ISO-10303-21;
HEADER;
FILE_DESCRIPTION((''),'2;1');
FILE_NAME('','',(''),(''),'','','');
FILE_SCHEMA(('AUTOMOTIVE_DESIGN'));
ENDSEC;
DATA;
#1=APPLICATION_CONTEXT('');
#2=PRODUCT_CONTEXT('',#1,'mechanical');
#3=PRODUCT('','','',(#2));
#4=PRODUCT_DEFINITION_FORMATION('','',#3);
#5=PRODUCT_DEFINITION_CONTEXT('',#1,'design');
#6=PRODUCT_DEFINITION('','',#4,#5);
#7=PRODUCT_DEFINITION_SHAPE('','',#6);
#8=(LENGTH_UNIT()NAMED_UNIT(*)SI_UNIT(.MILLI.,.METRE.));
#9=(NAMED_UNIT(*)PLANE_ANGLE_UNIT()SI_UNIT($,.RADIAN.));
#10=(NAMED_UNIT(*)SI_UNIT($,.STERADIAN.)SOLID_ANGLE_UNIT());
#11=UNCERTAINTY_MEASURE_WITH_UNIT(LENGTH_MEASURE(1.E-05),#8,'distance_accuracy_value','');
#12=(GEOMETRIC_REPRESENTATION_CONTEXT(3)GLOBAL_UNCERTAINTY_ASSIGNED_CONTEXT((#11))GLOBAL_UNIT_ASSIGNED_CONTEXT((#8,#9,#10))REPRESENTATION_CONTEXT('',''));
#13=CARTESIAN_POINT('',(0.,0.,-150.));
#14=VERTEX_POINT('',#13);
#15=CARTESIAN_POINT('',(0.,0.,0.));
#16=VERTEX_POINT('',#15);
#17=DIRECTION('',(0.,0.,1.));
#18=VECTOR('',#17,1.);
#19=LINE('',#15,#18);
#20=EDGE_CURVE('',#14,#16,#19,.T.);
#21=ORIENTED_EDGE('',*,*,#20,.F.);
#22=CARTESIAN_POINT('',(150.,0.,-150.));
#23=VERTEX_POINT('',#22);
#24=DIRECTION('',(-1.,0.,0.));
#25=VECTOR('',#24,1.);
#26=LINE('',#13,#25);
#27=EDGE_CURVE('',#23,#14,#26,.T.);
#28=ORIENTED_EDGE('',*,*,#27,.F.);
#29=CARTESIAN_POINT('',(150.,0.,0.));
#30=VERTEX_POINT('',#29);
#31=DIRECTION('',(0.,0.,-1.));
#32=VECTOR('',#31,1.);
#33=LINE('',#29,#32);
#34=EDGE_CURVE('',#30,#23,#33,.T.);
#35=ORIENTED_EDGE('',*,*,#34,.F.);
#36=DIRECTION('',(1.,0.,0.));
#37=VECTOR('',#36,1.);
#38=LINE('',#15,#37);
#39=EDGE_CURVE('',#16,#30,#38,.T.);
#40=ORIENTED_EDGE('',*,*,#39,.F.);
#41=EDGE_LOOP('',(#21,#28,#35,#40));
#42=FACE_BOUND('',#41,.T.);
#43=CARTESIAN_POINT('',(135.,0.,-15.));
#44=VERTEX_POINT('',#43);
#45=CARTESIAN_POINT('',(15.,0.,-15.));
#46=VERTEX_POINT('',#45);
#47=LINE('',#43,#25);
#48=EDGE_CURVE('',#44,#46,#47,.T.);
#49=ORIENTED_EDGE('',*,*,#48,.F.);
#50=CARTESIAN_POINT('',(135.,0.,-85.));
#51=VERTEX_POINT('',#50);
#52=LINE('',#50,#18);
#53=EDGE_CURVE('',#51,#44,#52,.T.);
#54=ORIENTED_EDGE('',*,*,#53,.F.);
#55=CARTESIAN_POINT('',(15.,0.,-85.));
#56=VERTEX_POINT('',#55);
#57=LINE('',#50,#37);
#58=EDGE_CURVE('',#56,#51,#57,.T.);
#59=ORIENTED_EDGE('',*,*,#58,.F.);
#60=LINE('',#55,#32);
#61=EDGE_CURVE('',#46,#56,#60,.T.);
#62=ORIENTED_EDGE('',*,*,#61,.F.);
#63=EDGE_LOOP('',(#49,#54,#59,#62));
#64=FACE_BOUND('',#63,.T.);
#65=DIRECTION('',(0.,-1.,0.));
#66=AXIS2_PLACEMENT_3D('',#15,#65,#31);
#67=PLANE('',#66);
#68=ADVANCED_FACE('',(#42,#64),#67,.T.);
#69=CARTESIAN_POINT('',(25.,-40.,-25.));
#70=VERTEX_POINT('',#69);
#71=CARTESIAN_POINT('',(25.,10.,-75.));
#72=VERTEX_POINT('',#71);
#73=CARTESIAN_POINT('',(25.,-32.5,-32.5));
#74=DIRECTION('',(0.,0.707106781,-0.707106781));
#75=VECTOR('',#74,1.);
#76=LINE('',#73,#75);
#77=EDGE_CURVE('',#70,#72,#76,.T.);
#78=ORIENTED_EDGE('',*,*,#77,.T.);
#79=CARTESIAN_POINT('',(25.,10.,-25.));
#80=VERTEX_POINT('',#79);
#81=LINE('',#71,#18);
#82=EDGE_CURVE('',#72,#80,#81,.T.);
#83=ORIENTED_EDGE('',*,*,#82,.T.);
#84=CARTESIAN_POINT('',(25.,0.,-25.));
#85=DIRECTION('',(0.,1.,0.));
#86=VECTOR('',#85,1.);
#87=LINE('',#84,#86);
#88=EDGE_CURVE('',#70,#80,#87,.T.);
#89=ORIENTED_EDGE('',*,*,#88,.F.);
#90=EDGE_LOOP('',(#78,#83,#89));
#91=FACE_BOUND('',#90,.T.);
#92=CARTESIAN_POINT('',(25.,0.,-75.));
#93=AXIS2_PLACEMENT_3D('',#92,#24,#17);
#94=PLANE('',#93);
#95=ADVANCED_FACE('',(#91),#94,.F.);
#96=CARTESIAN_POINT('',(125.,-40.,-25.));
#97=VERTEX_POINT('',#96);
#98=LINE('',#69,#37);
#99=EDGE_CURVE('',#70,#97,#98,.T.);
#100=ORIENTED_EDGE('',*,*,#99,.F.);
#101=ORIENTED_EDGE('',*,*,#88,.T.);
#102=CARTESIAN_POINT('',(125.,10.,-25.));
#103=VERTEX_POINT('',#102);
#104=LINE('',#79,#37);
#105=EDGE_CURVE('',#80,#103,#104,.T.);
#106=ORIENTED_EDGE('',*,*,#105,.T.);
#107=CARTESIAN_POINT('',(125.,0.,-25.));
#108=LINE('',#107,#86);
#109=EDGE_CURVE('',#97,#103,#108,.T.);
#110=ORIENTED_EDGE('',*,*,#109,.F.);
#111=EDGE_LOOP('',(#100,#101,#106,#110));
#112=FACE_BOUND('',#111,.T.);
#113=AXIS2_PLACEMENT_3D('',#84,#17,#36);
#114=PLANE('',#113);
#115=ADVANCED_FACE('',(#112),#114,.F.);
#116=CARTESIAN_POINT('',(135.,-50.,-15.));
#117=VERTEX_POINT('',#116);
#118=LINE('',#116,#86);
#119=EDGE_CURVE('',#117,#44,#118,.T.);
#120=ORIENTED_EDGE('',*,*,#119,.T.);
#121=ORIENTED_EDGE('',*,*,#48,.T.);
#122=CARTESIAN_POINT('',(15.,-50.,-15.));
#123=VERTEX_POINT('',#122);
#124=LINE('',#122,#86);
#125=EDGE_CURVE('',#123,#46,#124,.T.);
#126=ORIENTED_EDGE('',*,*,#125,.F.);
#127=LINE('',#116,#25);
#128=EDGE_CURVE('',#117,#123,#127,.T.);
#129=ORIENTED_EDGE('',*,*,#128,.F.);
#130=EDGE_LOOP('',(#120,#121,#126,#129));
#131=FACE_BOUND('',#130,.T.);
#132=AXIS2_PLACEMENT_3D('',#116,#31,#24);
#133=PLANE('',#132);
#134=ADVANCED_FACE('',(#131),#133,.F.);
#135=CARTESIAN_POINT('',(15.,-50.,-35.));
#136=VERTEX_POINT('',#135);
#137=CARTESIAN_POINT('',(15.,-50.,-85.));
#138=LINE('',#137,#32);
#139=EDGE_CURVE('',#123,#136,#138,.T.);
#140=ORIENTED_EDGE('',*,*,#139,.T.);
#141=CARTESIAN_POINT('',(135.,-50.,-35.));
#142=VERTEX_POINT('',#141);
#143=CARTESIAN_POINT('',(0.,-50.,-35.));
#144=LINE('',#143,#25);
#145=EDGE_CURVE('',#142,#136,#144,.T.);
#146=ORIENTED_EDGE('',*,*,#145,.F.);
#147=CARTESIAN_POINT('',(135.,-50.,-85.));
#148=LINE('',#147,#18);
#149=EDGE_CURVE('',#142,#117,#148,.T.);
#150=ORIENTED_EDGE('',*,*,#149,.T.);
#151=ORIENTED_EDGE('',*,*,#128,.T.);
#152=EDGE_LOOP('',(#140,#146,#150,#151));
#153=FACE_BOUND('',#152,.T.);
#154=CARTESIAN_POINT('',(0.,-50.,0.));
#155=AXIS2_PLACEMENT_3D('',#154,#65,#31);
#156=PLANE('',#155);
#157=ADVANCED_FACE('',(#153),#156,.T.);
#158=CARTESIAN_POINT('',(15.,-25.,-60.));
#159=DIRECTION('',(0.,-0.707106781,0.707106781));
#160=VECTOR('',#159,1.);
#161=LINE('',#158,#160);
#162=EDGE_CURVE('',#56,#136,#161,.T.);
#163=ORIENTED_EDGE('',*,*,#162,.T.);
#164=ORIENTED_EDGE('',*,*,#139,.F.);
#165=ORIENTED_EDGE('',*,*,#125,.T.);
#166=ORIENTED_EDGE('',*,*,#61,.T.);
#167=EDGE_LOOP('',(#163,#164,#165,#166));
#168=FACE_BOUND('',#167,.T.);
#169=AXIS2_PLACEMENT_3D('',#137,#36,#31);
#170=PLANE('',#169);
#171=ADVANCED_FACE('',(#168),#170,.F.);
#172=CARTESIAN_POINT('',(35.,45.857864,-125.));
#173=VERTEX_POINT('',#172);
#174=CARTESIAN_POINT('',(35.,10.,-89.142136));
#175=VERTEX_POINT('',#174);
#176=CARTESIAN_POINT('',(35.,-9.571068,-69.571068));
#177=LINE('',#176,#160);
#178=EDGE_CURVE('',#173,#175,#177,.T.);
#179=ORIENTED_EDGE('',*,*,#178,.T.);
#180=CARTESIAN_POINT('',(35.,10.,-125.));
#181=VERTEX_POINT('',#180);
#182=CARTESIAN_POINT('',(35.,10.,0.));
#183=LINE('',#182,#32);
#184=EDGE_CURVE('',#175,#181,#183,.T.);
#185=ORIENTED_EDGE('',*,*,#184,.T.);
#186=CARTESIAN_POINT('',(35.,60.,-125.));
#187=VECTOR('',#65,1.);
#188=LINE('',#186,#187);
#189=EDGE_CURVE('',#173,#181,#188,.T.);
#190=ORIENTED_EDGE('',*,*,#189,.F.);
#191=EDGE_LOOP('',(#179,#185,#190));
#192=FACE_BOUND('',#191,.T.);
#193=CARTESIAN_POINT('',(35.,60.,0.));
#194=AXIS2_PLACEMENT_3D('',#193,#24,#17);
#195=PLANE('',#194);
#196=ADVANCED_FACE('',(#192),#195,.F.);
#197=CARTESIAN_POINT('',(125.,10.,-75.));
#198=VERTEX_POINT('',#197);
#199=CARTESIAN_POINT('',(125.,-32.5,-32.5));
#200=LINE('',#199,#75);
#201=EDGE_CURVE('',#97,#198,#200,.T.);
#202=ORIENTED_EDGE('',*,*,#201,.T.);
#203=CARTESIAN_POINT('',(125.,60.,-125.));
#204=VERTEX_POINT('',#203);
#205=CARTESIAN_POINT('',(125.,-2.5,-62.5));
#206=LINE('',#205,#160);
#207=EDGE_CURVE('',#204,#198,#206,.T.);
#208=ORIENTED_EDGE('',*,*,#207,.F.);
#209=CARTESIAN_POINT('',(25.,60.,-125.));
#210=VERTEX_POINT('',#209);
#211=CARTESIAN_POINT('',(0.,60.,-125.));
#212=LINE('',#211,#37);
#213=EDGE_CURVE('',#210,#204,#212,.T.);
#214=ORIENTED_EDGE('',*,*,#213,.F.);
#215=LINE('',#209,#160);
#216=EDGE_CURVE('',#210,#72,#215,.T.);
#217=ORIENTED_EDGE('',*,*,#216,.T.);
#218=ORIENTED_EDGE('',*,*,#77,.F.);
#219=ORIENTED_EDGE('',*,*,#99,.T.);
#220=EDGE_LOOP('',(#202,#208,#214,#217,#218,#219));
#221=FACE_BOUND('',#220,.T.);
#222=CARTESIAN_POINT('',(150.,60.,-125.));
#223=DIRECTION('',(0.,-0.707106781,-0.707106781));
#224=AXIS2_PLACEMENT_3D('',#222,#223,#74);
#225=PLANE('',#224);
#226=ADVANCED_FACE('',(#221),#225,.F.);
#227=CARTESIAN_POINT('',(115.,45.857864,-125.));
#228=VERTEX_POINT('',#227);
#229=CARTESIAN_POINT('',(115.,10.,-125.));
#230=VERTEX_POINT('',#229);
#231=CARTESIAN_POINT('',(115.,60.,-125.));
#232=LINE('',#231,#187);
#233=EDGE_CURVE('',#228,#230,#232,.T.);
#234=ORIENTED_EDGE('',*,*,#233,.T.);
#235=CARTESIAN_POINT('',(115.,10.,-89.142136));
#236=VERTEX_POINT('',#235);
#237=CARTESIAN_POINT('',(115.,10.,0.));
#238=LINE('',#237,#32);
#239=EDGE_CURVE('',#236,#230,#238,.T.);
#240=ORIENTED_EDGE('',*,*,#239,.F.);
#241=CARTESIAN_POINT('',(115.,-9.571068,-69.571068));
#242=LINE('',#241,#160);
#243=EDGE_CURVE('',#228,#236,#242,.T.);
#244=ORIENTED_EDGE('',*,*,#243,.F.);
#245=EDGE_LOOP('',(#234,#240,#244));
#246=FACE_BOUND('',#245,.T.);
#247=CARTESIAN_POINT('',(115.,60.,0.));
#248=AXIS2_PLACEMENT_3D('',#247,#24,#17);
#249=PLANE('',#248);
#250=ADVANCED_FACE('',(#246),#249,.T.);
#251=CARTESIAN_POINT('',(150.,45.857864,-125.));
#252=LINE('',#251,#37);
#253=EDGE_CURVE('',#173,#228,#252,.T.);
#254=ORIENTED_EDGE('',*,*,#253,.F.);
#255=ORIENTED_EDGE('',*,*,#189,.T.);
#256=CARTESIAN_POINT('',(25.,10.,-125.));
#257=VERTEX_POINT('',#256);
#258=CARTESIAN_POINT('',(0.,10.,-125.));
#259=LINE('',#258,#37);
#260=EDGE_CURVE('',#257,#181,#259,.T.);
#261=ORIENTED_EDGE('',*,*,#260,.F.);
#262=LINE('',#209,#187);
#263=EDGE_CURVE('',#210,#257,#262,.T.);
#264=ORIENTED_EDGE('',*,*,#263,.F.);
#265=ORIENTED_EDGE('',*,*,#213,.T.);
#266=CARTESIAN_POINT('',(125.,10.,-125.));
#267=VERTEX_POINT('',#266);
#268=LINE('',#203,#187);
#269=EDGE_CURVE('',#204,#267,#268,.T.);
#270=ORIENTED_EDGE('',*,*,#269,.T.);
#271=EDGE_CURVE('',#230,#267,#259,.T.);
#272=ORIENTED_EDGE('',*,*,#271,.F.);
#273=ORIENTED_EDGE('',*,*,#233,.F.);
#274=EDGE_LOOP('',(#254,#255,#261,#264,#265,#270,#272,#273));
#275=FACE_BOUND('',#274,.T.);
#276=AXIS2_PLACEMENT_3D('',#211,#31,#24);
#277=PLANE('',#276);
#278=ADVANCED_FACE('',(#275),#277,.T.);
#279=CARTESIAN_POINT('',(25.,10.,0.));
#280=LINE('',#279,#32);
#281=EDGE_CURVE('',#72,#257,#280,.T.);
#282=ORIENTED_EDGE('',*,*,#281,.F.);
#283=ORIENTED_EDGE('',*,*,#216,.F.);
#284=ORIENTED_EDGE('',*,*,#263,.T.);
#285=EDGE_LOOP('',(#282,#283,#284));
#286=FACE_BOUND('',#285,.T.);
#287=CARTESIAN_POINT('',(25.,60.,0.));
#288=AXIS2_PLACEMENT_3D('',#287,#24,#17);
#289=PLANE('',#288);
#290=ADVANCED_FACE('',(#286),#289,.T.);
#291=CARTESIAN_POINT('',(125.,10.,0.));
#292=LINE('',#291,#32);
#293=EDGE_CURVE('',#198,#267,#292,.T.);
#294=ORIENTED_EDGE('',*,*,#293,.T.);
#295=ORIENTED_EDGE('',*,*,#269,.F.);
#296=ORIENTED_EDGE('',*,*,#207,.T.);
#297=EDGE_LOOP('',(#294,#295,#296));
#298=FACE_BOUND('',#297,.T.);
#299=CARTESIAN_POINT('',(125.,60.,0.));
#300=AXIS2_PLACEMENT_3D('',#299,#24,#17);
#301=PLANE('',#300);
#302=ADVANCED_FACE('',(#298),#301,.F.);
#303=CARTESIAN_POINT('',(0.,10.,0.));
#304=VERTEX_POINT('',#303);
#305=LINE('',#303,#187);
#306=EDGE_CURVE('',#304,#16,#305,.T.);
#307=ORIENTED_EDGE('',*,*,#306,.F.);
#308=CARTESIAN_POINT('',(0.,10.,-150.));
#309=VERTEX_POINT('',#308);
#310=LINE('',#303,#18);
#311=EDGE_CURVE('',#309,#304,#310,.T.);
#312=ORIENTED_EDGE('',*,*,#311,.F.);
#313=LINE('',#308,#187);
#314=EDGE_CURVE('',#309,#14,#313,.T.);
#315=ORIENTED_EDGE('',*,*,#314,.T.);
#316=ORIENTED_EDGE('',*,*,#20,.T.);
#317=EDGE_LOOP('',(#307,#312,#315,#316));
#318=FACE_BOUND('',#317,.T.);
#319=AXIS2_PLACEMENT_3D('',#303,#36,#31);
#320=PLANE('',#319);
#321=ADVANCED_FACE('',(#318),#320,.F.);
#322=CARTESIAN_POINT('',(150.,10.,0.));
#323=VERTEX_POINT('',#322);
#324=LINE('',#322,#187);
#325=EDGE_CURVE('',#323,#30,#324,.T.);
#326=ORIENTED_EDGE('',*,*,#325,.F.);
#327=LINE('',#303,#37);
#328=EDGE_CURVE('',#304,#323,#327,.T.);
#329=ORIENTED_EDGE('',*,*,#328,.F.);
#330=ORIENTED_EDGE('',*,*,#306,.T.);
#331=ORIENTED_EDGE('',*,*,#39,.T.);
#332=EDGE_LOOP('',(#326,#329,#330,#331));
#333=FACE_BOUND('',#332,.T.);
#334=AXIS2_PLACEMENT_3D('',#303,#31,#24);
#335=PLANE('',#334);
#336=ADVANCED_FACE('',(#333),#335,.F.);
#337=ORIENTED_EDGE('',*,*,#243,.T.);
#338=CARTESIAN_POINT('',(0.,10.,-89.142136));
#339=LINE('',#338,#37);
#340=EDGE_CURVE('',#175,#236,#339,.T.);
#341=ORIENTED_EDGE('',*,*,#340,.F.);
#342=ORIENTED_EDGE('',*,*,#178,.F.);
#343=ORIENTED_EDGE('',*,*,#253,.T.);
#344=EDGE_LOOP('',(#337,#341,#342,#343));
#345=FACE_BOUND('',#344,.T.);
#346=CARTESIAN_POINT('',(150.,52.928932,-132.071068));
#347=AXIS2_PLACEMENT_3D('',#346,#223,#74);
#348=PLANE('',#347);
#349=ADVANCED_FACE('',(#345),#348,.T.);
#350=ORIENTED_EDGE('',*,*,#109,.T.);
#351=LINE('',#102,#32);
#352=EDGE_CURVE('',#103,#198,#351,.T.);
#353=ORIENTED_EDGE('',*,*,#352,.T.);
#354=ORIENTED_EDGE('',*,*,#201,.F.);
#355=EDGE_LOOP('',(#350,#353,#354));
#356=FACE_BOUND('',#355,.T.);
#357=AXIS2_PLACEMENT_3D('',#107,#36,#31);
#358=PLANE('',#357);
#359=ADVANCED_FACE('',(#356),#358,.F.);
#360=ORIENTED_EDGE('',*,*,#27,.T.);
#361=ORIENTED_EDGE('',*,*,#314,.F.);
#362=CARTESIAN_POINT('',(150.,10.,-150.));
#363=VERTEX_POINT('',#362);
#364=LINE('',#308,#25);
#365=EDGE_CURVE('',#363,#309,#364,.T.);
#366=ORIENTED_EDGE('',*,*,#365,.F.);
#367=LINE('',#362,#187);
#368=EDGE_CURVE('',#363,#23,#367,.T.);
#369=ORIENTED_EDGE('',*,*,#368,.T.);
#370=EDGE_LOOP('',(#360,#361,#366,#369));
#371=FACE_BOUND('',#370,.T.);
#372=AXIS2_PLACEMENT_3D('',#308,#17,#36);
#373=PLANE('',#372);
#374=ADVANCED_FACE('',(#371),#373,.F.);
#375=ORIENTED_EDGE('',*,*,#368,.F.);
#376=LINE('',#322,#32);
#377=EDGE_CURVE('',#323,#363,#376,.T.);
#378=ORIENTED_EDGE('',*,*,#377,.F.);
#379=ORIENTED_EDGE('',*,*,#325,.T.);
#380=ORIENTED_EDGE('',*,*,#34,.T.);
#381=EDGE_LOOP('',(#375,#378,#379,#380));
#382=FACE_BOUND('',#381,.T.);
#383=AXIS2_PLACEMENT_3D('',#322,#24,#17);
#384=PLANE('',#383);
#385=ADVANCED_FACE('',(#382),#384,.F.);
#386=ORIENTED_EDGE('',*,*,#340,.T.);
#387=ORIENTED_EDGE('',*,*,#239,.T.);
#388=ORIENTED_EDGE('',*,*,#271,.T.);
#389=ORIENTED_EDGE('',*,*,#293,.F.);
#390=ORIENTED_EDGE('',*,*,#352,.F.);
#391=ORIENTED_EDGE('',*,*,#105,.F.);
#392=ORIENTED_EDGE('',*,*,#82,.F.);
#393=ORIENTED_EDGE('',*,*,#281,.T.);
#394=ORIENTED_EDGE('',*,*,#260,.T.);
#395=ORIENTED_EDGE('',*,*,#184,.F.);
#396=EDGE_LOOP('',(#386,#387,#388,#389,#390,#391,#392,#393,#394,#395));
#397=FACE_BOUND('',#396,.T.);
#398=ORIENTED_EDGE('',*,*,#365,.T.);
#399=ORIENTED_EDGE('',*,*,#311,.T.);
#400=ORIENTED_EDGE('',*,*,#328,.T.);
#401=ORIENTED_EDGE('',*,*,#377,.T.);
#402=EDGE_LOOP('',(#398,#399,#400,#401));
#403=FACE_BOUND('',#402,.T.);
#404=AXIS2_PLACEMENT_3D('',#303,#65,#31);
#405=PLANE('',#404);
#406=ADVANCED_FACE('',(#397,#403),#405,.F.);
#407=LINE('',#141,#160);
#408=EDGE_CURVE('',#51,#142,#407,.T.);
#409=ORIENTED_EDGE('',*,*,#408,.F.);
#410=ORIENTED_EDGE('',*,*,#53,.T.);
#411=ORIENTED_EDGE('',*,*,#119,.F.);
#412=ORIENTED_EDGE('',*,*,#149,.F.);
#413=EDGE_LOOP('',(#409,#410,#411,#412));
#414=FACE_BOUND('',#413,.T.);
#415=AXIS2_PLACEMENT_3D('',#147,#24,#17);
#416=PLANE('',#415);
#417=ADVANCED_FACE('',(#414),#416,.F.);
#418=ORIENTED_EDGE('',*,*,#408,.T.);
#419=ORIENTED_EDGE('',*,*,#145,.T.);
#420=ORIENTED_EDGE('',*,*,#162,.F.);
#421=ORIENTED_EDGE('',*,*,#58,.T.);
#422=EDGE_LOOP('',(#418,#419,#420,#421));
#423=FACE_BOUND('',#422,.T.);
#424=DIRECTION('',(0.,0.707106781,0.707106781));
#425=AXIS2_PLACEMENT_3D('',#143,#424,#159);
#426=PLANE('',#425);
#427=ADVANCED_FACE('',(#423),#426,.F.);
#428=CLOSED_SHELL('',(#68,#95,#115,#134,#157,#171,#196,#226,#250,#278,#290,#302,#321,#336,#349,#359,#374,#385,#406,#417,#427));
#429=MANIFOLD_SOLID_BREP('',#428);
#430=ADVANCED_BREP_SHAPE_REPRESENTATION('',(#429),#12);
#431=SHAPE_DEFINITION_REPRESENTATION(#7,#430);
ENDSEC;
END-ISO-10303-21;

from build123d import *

# Parameters (mm, degrees)
SKETCH1_W           = 150
SKETCH1_H           = 150
BOSS_EXTRUDE1_DEPTH = 10
SKETCH3_W           = 100
SKETCH3_H           = 50
BOSS_EXTRUDE2_DEPTH = 50
CUT_EXTRUDE1_DEPTH  = 205.266982158
SKETCH5_W           = 100
SKETCH5_H           = 50
CUT_EXTRUDE2_DEPTH  = 218.944947177
SKETCH7_W           = 120
SKETCH7_H           = 70
BOSS_EXTRUDE6_DEPTH = 50
BOSS_EXTRUDE7_DEPTH = 100
SKETCH9_W           = 100
SKETCH9_H           = 40
CUT_EXTRUDE4_DEPTH  = 40
BOSS_EXTRUDE8_DEPTH = 100
CUT_EXTRUDE5_DEPTH  = 211.535032714
SHELL1_START        = 35
SHELL1_DEPTH        = 80


# Read off the part's stored shape, not the designer's step: Shell1
with BuildPart() as part:
    # Sketch1 → Boss-Extrude1 (new body)
    with BuildSketch(Plane(origin=(0, 0, 0), x_dir=(1, 0, 0), z_dir=(0, 1, 0))):
        with Locations((75, 75)):
            Rectangle(SKETCH1_W, SKETCH1_H)
    extrude(amount=BOSS_EXTRUDE1_DEPTH)

    # Sketch3 → Boss-Extrude2 (add)
    with BuildSketch(Plane(origin=(0, 10, 0), x_dir=(1, 0, 0), z_dir=(0, 1, 0))):
        with Locations((75, 100)):
            Rectangle(SKETCH3_W, SKETCH3_H)
    extrude(amount=BOSS_EXTRUDE2_DEPTH)

    # Sketch4 → Cut-Extrude1 (cut, through all)
    with BuildSketch(Plane.ZY.offset(-25)):
        Polygon((-125, 60), (-75, 10), (-75, 60), align=None)
    extrude(amount=-CUT_EXTRUDE1_DEPTH, mode=Mode.SUBTRACT)

    # Sketch5 → Cut-Extrude2 (cut, through all)
    with BuildSketch(Plane(origin=(0, 10, 0), x_dir=(1, 0, 0), z_dir=(0, 1, 0))):
        with Locations((75, 50)):
            Rectangle(SKETCH5_W, SKETCH5_H)
    extrude(amount=-CUT_EXTRUDE2_DEPTH, mode=Mode.SUBTRACT)

    # Sketch7 → Boss-Extrude6 (add)
    with BuildSketch(Plane.XZ):
        with Locations((75, -50)):
            Rectangle(SKETCH7_W, SKETCH7_H)
    extrude(amount=BOSS_EXTRUDE6_DEPTH)

    # Sketch6 → Boss-Extrude7 (add)
    with BuildSketch(Plane(origin=(25, 0, 0), x_dir=(0, 0, -1), z_dir=(1, 0, 0))):
        Polygon((75, 0), (75, 10), (65, 0), align=None)
    extrude(amount=BOSS_EXTRUDE7_DEPTH)

    # Sketch9 → Cut-Extrude4 (cut)
    with BuildSketch(Plane(origin=(0, 0, 0), x_dir=(1, 0, 0), z_dir=(0, 1, 0))):
        with Locations((75, 45)):
            Rectangle(SKETCH9_W, SKETCH9_H)
    extrude(amount=-CUT_EXTRUDE4_DEPTH, mode=Mode.SUBTRACT)

    # Sketch10 → Boss-Extrude8 (add)
    with BuildSketch(Plane(origin=(25, 0, 0), x_dir=(0, 0, -1), z_dir=(1, 0, 0))):
        Polygon((65, 0), (25, -40), (65, -40), align=None)
    extrude(amount=BOSS_EXTRUDE8_DEPTH)

    # Sketch11 → Cut-Extrude5 (cut, through all)
    with BuildSketch(Plane(origin=(135, 0, 0), x_dir=(0, 0, -1), z_dir=(1, 0, 0))):
        Polygon((85, 0), (85, -50), (35, -50), align=None)
    extrude(amount=-CUT_EXTRUDE5_DEPTH, mode=Mode.SUBTRACT)

    # Shell1 outline → Shell1 (cut)
    with BuildSketch(Plane.YZ.offset(SHELL1_START)):
        Polygon((45.857864376, -125), (10, -89.142135624), (10, -125), align=None)
    extrude(amount=SHELL1_DEPTH, mode=Mode.SUBTRACT)


solid = part.part
